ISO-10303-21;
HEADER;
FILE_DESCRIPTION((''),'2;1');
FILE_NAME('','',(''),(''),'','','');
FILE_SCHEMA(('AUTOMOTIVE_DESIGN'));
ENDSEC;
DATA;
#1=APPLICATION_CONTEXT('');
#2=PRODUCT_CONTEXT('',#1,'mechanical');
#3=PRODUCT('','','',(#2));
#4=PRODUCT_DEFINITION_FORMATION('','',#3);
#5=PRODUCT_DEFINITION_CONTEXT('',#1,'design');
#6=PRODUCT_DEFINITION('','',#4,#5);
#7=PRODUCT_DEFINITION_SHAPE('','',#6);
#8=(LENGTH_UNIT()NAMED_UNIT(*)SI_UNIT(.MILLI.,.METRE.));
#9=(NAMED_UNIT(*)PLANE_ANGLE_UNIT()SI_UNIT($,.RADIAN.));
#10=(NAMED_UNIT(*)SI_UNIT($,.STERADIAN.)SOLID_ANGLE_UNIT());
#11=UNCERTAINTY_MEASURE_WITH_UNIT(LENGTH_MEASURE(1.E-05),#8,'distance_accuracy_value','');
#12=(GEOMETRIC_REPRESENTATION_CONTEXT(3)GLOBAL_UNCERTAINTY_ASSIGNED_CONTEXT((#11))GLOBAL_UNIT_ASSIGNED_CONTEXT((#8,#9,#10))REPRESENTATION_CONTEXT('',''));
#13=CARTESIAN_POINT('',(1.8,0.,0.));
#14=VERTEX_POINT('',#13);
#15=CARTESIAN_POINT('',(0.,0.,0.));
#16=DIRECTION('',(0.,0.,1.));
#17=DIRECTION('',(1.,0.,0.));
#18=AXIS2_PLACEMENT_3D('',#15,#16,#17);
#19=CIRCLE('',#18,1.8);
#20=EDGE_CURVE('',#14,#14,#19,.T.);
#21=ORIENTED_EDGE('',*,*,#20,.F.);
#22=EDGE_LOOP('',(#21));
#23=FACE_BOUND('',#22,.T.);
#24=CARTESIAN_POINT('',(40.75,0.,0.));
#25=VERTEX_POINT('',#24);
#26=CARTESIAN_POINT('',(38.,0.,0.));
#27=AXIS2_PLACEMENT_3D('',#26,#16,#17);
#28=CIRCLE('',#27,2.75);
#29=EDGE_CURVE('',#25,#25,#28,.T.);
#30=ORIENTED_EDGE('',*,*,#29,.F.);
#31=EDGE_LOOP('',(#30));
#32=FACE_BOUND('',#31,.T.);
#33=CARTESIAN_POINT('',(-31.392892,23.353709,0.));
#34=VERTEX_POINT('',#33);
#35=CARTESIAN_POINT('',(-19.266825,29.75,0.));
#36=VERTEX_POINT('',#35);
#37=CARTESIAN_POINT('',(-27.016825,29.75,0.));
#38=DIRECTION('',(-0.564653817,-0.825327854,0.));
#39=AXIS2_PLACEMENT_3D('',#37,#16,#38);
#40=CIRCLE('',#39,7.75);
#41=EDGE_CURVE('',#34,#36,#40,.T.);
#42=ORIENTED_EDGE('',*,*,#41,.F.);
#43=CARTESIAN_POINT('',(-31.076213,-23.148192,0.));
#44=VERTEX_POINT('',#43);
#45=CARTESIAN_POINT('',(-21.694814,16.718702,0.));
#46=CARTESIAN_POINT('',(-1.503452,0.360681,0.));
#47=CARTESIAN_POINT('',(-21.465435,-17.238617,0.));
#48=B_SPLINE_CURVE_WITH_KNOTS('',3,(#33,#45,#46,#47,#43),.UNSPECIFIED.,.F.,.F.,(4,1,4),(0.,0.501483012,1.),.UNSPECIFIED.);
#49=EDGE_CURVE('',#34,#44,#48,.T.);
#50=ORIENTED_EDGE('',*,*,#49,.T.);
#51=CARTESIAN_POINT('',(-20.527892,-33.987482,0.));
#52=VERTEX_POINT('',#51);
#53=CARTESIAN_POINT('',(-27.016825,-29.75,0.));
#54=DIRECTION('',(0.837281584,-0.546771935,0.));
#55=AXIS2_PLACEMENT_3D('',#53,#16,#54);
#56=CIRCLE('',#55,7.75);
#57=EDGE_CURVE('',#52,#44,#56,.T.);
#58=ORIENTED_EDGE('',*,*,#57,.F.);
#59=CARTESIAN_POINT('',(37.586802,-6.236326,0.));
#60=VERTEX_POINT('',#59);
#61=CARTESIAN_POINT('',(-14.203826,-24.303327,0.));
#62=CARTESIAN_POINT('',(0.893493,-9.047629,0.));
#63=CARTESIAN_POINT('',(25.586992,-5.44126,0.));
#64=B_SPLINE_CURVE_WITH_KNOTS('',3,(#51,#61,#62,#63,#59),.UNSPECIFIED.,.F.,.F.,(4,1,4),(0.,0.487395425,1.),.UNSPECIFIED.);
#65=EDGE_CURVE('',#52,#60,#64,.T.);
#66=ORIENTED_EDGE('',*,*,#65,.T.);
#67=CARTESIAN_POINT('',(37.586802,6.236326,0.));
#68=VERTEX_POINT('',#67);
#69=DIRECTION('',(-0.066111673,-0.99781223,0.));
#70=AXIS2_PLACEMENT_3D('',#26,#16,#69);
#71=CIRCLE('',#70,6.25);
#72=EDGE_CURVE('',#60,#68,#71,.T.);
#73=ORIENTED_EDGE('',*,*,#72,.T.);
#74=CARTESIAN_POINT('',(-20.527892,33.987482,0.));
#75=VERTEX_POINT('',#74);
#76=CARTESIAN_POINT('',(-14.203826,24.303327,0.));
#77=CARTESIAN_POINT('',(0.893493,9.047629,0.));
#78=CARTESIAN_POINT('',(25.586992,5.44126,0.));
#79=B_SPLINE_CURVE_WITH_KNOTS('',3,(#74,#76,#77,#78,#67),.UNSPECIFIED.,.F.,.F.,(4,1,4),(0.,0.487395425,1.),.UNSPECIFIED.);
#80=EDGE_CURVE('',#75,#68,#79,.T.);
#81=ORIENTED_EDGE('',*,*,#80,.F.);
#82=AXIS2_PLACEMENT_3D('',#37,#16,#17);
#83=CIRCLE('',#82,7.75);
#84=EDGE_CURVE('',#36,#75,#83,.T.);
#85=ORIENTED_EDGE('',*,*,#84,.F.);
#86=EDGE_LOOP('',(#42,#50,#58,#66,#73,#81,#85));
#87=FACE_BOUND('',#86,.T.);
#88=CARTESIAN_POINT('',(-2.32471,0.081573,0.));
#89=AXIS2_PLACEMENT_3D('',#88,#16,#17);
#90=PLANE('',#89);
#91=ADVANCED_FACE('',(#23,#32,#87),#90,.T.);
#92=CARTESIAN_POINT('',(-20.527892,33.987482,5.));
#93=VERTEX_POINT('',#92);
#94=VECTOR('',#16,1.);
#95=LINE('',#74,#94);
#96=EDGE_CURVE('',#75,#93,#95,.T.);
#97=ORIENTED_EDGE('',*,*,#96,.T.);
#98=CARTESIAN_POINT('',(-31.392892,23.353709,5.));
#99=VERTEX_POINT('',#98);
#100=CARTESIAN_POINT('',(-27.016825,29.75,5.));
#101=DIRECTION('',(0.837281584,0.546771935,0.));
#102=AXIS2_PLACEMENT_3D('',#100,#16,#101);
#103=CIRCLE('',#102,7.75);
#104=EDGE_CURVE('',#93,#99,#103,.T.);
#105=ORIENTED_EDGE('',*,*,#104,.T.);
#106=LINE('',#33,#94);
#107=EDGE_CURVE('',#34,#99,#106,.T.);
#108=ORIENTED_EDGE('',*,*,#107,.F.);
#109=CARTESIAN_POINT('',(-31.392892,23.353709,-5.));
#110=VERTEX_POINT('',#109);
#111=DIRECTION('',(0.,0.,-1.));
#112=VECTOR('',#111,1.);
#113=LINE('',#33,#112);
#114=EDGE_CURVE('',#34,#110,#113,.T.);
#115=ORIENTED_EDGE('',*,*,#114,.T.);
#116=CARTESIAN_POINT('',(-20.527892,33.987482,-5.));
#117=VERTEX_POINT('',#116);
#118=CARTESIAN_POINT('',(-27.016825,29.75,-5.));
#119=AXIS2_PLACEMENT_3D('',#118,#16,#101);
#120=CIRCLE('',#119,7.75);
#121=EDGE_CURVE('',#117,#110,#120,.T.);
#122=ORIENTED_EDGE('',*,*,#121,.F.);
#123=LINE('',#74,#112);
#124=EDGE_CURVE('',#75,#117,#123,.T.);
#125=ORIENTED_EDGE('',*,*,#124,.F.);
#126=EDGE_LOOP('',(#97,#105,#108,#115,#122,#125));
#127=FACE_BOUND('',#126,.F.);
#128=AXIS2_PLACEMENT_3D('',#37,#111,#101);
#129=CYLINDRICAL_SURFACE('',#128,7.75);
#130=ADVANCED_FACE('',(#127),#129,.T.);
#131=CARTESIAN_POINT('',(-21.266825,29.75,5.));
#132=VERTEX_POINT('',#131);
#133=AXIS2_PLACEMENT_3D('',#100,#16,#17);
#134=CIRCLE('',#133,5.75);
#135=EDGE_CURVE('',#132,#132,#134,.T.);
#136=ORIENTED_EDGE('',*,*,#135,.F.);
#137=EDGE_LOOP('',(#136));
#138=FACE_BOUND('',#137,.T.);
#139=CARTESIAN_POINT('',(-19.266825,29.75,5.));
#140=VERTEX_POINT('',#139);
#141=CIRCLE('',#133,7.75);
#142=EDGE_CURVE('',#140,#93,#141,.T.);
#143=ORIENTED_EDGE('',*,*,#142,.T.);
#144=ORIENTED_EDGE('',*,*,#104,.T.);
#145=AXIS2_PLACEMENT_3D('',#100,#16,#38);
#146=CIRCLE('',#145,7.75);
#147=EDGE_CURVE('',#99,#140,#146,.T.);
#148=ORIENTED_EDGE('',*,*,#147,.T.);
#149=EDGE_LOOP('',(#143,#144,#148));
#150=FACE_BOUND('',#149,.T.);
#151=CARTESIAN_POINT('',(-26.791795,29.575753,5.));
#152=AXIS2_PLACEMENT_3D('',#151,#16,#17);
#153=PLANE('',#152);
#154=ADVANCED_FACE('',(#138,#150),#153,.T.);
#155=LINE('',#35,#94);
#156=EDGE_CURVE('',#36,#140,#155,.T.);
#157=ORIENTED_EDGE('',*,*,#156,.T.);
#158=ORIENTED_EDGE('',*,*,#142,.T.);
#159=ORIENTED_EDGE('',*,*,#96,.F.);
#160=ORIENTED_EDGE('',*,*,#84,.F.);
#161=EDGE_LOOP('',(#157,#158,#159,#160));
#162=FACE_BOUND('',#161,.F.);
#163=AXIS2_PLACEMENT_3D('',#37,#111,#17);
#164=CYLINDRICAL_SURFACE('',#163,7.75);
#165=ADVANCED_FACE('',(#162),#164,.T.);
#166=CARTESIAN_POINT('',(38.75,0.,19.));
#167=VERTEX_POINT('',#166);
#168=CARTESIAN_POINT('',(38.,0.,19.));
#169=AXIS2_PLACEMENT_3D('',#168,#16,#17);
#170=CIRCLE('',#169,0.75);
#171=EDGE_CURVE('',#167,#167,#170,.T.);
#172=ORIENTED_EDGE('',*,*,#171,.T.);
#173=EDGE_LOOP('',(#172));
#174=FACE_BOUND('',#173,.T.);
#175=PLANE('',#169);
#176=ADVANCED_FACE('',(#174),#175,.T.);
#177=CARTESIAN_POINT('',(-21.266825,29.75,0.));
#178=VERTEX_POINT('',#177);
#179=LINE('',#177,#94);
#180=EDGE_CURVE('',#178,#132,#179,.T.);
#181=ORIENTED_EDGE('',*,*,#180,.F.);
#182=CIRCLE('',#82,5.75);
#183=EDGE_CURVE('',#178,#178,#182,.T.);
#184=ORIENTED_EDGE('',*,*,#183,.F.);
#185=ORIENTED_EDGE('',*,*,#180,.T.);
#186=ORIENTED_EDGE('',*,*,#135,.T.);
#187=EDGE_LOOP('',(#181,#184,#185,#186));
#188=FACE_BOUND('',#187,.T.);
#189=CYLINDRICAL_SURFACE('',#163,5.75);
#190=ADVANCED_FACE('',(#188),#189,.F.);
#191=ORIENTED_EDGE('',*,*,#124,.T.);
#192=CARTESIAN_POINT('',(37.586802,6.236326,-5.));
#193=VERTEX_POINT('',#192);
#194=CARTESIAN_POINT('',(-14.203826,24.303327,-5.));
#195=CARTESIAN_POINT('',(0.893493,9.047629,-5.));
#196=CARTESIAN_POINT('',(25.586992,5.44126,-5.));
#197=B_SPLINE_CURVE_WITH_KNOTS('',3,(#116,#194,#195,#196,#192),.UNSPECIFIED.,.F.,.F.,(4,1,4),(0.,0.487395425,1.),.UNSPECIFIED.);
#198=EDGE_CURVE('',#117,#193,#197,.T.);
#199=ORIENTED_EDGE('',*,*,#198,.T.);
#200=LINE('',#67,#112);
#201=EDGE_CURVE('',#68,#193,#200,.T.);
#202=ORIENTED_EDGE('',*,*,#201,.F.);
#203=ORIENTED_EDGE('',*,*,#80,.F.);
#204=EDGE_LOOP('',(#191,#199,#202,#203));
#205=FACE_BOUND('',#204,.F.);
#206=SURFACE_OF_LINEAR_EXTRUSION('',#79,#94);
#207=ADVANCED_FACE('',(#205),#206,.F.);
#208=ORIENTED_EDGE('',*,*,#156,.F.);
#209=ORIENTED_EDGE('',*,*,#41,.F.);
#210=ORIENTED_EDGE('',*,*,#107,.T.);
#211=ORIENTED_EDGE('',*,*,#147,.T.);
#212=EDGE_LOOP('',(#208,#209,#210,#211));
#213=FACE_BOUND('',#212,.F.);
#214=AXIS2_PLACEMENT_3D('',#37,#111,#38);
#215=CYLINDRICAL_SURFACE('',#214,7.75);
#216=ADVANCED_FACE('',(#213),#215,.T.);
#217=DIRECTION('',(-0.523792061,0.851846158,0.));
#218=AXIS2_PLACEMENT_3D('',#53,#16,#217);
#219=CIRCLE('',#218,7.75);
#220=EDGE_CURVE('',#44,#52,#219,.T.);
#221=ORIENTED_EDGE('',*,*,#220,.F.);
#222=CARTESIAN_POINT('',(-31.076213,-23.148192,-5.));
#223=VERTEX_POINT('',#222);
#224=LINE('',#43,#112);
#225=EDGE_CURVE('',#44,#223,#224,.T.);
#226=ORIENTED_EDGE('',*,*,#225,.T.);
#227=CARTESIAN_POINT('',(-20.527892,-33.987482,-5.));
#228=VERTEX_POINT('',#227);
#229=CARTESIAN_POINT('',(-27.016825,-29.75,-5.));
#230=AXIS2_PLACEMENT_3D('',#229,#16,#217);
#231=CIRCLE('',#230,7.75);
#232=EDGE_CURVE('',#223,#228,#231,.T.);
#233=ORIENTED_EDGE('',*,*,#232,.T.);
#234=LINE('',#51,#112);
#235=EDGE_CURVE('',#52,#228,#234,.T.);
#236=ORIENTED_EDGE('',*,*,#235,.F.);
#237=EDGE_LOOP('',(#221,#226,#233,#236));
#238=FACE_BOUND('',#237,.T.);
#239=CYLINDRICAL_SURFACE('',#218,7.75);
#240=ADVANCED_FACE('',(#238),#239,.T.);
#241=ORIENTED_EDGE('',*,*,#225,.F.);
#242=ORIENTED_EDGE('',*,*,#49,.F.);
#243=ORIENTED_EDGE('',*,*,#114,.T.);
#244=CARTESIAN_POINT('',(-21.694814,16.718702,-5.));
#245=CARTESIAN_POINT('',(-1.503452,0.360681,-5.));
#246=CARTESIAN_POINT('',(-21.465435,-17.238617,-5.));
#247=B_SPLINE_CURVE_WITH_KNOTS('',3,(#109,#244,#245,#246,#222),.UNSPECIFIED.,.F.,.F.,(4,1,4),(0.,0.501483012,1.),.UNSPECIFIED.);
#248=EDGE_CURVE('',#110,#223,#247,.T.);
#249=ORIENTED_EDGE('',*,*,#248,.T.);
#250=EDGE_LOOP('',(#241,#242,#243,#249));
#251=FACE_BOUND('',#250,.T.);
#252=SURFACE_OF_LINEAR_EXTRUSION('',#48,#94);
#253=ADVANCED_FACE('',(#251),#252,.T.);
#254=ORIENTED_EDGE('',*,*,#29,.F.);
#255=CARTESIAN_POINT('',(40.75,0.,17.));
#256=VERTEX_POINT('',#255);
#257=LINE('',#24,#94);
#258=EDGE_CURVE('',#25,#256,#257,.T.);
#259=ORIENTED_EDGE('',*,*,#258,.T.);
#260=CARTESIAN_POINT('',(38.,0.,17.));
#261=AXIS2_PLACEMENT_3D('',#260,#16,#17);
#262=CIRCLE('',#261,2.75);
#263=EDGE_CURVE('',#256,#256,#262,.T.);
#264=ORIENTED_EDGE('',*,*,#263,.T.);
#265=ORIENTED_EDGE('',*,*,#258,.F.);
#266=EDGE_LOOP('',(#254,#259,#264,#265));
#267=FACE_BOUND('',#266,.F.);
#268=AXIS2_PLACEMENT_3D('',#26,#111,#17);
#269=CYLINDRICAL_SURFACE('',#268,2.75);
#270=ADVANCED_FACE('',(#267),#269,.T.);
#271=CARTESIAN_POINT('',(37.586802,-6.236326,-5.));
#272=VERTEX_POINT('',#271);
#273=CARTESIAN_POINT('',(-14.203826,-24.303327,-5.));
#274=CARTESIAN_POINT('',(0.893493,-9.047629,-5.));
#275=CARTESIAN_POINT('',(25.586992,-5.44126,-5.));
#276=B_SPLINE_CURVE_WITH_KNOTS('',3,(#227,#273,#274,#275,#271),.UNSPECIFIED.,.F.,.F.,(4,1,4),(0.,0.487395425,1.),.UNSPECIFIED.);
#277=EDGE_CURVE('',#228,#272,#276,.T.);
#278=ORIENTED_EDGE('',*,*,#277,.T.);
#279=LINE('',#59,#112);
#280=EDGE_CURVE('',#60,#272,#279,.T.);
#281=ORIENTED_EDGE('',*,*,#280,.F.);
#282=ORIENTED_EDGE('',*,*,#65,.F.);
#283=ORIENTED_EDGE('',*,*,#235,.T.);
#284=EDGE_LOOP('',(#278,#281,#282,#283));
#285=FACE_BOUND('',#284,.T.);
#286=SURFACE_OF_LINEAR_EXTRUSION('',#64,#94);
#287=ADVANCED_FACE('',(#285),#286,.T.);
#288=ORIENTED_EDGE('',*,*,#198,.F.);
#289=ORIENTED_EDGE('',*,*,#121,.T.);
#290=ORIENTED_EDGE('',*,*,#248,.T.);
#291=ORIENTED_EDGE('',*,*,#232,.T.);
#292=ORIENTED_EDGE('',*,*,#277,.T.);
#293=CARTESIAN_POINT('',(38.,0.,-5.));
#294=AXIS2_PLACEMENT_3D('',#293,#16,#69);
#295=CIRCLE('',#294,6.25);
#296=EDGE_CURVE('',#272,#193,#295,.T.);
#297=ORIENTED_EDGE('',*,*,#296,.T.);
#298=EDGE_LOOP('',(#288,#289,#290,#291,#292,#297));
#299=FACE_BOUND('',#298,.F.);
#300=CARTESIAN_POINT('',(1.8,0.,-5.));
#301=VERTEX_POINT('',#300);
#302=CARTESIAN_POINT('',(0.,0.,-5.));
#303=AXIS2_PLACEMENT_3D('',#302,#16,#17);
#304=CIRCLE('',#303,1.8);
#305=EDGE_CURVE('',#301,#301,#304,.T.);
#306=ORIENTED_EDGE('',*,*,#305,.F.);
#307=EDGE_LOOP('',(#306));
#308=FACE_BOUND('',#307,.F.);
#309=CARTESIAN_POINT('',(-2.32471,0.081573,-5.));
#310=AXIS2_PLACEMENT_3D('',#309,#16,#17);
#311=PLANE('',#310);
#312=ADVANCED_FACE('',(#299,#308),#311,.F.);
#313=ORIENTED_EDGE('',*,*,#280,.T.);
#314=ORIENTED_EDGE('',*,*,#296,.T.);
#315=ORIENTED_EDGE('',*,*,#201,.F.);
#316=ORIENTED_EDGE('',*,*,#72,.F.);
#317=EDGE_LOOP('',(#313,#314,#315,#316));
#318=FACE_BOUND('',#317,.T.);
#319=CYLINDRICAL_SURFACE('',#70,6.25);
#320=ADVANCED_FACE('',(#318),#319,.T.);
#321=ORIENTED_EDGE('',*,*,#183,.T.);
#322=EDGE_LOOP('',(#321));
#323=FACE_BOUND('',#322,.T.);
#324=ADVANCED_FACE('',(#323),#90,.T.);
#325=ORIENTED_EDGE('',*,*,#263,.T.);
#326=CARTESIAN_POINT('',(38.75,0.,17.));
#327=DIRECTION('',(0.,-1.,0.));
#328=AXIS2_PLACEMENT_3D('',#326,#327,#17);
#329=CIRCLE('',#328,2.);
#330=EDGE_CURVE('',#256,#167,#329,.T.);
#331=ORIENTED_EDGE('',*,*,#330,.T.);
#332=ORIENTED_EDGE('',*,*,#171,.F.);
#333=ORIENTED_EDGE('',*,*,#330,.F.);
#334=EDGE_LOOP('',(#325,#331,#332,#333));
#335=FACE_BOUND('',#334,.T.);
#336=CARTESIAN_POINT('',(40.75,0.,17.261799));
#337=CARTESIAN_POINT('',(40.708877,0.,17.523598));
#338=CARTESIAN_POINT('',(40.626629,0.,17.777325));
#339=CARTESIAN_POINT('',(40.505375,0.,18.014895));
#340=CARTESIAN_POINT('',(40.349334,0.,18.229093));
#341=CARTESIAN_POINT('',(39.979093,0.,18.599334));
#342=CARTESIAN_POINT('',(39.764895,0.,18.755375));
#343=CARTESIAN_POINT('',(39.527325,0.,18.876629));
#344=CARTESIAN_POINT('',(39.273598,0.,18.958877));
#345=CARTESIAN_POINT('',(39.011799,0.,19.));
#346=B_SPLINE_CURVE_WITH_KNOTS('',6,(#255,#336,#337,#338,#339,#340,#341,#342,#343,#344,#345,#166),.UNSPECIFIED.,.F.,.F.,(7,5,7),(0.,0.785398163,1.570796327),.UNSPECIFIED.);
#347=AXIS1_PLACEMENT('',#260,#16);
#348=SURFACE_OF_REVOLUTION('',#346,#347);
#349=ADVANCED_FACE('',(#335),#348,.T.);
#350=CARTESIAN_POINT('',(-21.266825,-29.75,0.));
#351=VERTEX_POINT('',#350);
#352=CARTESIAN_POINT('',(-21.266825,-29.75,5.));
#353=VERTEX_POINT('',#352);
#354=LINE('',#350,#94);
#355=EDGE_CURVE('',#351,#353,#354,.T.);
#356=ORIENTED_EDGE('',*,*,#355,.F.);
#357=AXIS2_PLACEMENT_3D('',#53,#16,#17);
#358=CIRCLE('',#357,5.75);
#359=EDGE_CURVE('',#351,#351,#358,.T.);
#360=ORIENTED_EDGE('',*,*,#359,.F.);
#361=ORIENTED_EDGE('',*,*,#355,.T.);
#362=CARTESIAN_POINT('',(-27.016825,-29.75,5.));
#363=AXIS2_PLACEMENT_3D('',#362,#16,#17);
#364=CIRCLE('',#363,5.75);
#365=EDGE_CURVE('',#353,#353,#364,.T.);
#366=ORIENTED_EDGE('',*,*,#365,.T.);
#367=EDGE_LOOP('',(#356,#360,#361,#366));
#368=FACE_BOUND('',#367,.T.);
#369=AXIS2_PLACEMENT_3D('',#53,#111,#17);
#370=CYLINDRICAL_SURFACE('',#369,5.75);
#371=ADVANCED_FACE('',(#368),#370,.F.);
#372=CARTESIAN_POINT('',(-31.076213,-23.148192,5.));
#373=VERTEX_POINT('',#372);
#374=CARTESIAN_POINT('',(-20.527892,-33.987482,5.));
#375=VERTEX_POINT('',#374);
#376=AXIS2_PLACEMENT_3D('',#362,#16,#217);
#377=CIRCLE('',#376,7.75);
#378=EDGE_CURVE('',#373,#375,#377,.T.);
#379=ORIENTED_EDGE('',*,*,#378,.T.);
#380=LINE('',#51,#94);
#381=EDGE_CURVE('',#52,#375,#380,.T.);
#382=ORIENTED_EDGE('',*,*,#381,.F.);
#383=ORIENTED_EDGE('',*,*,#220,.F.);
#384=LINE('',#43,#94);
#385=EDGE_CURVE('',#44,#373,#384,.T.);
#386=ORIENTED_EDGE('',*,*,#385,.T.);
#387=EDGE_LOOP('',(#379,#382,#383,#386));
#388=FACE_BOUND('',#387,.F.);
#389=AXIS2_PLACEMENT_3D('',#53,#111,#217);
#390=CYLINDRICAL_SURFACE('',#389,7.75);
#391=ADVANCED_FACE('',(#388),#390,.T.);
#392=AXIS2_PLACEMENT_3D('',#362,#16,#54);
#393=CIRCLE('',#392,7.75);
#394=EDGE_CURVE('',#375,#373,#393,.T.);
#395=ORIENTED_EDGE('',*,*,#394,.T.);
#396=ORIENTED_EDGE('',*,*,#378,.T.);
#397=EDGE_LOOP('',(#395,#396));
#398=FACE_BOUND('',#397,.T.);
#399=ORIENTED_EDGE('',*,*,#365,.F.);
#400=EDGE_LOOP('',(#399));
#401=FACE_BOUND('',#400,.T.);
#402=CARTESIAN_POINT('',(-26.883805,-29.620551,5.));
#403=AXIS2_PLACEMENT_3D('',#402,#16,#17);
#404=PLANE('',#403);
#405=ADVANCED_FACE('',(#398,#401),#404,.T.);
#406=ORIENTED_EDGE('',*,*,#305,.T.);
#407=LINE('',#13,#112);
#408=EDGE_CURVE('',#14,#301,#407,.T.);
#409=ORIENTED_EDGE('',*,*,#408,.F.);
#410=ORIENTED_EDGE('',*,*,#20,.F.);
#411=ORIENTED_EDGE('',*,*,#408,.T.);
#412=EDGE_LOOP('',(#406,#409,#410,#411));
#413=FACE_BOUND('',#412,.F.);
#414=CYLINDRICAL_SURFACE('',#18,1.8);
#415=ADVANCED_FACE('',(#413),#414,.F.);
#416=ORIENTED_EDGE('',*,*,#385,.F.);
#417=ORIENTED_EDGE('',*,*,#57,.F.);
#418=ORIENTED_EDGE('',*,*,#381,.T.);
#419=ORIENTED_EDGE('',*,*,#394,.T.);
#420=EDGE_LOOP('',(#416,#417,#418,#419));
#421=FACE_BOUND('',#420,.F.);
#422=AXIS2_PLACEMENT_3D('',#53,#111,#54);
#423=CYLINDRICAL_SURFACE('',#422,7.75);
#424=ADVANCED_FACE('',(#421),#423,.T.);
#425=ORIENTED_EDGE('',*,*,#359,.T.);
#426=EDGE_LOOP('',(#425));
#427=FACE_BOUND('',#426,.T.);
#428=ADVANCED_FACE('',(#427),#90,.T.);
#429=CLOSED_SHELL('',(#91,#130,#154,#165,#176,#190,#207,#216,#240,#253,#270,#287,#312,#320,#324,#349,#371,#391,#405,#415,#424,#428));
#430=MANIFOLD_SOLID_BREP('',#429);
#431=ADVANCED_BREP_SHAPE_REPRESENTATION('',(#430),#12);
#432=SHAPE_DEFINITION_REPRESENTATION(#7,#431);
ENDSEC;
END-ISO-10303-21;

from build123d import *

# Parameters (mm, degrees)
F0_R     = 1.8
F0_R_2   = 2.75
F0_R_3   = 5.75
F1_DEPTH = 5
F2_DEPTH = 5
F3_DEPTH = 19
F4_R     = 2


with BuildPart() as f1:
    # F0 (on Top) → F1 (new body)
    with BuildSketch(Plane.XY):
        with BuildLine():
            ThreePointArc((-20.5278924674, 33.9874824942), (-19.5887790687, 31.9605740028), (-19.2668247456, 29.75))
            ThreePointArc((-19.2668247456, 29.75), (-23.4010274534, 22.8951834494), (-31.3928918273, 23.3537091298))
            add(Edge.make_bspline(
                [(-31.3928918273, 23.3537091298), (-21.6948142815, 16.7187016285), (-1.5034517677, 0.3606813033), (-21.4654354866, -17.2386169061), (-31.0762132171, -23.1481922751)],
                knots=[0, 0, 0, 0, 0.5014830117, 1, 1, 1, 1], degree=3))
            ThreePointArc((-31.0762132171, -23.1481922751), (-23.2351426235, -22.9852841651), (-19.2668247456, -29.75))
            ThreePointArc((-19.2668247456, -29.75), (-19.5887790687, -31.9605740028), (-20.5278924674, -33.9874824942))
            add(Edge.make_bspline(
                [(-20.5278924674, -33.9874824942), (-14.2038261776, -24.3033273542), (0.8934932617, -9.0476289983), (25.586991994, -5.4412595008), (37.5868020457, -6.2363264387)],
                knots=[0, 0, 0, 0, 0.4873954252, 1, 1, 1, 1], degree=3))
            ThreePointArc((37.5868020457, -6.2363264387), (44.25, 0), (37.5868020457, 6.2363264387))
            add(Edge.make_bspline(
                [(-20.5278924674, 33.9874824942), (-14.2038261776, 24.3033273542), (0.8934932617, 9.0476289983), (25.586991994, 5.4412595008), (37.5868020457, 6.2363264387)],
                knots=[0, 0, 0, 0, 0.4873954252, 1, 1, 1, 1], degree=3))
        make_face()
        Circle(F0_R, mode=Mode.SUBTRACT)
        with Locations((38, 0)):
            Circle(F0_R_2, mode=Mode.SUBTRACT)
        with BuildLine():
            ThreePointArc((-31.3928918273, 23.3537091298), (-23.4010274534, 22.8951834494), (-19.2668247456, 29.75))
            ThreePointArc((-19.2668247456, 29.75), (-19.5887790687, 31.9605740028), (-20.5278924674, 33.9874824942))
            ThreePointArc((-20.5278924674, 33.9874824942), (-32.4376488366, 35.2886971549), (-31.3928918273, 23.3537091298))
        make_face()
        with Locations((-27.0168247456, 29.75)):
            Circle(F0_R_3, mode=Mode.SUBTRACT)
        with BuildLine():
            ThreePointArc((-19.2668247456, -29.75), (-23.2351426235, -22.9852841651), (-31.0762132171, -23.1481922751))
            ThreePointArc((-31.0762132171, -23.1481922751), (-32.5709424875, -35.1550232293), (-20.5278924674, -33.9874824942))
            ThreePointArc((-20.5278924674, -33.9874824942), (-19.5887790687, -31.9605740028), (-19.2668247456, -29.75))
        make_face()
        with Locations((-27.0168247456, -29.75)):
            Circle(F0_R_3, mode=Mode.SUBTRACT)
        with Locations((-27.0168247456, 29.75)):
            Circle(F0_R_3)
        with Locations((-27.0168247456, -29.75)):
            Circle(F0_R_3)
        with Locations((38, 0)):
            Circle(F0_R_2)
    extrude(amount=-F1_DEPTH)

    # F0 (on Top) → F2 (join)
    with BuildSketch(Plane.XY):
        with BuildLine():
            ThreePointArc((-31.3928918273, 23.3537091298), (-23.4010274534, 22.8951834494), (-19.2668247456, 29.75))
            ThreePointArc((-19.2668247456, 29.75), (-19.5887790687, 31.9605740028), (-20.5278924674, 33.9874824942))
            ThreePointArc((-20.5278924674, 33.9874824942), (-32.4376488366, 35.2886971549), (-31.3928918273, 23.3537091298))
        make_face()
        with Locations((-27.0168247456, 29.75)):
            Circle(F0_R_3, mode=Mode.SUBTRACT)
        with BuildLine():
            ThreePointArc((-19.2668247456, -29.75), (-23.2351426235, -22.9852841651), (-31.0762132171, -23.1481922751))
            ThreePointArc((-31.0762132171, -23.1481922751), (-32.5709424875, -35.1550232293), (-20.5278924674, -33.9874824942))
            ThreePointArc((-20.5278924674, -33.9874824942), (-19.5887790687, -31.9605740028), (-19.2668247456, -29.75))
        make_face()
        with Locations((-27.0168247456, -29.75)):
            Circle(F0_R_3, mode=Mode.SUBTRACT)
    extrude(amount=F2_DEPTH)

    # F0 (on Top) → F3 (join)
    with BuildSketch(Plane.XY):
        with Locations((38, 0)):
            Circle(F0_R_2)
    extrude(amount=F3_DEPTH)

    # F4
    f4_edges = [f1.edges().sort_by_distance(p)[0] for p in [
        (35.25, 0, 19),
    ]]
    fillet(f4_edges, radius=F4_R)


solid = f1.part
